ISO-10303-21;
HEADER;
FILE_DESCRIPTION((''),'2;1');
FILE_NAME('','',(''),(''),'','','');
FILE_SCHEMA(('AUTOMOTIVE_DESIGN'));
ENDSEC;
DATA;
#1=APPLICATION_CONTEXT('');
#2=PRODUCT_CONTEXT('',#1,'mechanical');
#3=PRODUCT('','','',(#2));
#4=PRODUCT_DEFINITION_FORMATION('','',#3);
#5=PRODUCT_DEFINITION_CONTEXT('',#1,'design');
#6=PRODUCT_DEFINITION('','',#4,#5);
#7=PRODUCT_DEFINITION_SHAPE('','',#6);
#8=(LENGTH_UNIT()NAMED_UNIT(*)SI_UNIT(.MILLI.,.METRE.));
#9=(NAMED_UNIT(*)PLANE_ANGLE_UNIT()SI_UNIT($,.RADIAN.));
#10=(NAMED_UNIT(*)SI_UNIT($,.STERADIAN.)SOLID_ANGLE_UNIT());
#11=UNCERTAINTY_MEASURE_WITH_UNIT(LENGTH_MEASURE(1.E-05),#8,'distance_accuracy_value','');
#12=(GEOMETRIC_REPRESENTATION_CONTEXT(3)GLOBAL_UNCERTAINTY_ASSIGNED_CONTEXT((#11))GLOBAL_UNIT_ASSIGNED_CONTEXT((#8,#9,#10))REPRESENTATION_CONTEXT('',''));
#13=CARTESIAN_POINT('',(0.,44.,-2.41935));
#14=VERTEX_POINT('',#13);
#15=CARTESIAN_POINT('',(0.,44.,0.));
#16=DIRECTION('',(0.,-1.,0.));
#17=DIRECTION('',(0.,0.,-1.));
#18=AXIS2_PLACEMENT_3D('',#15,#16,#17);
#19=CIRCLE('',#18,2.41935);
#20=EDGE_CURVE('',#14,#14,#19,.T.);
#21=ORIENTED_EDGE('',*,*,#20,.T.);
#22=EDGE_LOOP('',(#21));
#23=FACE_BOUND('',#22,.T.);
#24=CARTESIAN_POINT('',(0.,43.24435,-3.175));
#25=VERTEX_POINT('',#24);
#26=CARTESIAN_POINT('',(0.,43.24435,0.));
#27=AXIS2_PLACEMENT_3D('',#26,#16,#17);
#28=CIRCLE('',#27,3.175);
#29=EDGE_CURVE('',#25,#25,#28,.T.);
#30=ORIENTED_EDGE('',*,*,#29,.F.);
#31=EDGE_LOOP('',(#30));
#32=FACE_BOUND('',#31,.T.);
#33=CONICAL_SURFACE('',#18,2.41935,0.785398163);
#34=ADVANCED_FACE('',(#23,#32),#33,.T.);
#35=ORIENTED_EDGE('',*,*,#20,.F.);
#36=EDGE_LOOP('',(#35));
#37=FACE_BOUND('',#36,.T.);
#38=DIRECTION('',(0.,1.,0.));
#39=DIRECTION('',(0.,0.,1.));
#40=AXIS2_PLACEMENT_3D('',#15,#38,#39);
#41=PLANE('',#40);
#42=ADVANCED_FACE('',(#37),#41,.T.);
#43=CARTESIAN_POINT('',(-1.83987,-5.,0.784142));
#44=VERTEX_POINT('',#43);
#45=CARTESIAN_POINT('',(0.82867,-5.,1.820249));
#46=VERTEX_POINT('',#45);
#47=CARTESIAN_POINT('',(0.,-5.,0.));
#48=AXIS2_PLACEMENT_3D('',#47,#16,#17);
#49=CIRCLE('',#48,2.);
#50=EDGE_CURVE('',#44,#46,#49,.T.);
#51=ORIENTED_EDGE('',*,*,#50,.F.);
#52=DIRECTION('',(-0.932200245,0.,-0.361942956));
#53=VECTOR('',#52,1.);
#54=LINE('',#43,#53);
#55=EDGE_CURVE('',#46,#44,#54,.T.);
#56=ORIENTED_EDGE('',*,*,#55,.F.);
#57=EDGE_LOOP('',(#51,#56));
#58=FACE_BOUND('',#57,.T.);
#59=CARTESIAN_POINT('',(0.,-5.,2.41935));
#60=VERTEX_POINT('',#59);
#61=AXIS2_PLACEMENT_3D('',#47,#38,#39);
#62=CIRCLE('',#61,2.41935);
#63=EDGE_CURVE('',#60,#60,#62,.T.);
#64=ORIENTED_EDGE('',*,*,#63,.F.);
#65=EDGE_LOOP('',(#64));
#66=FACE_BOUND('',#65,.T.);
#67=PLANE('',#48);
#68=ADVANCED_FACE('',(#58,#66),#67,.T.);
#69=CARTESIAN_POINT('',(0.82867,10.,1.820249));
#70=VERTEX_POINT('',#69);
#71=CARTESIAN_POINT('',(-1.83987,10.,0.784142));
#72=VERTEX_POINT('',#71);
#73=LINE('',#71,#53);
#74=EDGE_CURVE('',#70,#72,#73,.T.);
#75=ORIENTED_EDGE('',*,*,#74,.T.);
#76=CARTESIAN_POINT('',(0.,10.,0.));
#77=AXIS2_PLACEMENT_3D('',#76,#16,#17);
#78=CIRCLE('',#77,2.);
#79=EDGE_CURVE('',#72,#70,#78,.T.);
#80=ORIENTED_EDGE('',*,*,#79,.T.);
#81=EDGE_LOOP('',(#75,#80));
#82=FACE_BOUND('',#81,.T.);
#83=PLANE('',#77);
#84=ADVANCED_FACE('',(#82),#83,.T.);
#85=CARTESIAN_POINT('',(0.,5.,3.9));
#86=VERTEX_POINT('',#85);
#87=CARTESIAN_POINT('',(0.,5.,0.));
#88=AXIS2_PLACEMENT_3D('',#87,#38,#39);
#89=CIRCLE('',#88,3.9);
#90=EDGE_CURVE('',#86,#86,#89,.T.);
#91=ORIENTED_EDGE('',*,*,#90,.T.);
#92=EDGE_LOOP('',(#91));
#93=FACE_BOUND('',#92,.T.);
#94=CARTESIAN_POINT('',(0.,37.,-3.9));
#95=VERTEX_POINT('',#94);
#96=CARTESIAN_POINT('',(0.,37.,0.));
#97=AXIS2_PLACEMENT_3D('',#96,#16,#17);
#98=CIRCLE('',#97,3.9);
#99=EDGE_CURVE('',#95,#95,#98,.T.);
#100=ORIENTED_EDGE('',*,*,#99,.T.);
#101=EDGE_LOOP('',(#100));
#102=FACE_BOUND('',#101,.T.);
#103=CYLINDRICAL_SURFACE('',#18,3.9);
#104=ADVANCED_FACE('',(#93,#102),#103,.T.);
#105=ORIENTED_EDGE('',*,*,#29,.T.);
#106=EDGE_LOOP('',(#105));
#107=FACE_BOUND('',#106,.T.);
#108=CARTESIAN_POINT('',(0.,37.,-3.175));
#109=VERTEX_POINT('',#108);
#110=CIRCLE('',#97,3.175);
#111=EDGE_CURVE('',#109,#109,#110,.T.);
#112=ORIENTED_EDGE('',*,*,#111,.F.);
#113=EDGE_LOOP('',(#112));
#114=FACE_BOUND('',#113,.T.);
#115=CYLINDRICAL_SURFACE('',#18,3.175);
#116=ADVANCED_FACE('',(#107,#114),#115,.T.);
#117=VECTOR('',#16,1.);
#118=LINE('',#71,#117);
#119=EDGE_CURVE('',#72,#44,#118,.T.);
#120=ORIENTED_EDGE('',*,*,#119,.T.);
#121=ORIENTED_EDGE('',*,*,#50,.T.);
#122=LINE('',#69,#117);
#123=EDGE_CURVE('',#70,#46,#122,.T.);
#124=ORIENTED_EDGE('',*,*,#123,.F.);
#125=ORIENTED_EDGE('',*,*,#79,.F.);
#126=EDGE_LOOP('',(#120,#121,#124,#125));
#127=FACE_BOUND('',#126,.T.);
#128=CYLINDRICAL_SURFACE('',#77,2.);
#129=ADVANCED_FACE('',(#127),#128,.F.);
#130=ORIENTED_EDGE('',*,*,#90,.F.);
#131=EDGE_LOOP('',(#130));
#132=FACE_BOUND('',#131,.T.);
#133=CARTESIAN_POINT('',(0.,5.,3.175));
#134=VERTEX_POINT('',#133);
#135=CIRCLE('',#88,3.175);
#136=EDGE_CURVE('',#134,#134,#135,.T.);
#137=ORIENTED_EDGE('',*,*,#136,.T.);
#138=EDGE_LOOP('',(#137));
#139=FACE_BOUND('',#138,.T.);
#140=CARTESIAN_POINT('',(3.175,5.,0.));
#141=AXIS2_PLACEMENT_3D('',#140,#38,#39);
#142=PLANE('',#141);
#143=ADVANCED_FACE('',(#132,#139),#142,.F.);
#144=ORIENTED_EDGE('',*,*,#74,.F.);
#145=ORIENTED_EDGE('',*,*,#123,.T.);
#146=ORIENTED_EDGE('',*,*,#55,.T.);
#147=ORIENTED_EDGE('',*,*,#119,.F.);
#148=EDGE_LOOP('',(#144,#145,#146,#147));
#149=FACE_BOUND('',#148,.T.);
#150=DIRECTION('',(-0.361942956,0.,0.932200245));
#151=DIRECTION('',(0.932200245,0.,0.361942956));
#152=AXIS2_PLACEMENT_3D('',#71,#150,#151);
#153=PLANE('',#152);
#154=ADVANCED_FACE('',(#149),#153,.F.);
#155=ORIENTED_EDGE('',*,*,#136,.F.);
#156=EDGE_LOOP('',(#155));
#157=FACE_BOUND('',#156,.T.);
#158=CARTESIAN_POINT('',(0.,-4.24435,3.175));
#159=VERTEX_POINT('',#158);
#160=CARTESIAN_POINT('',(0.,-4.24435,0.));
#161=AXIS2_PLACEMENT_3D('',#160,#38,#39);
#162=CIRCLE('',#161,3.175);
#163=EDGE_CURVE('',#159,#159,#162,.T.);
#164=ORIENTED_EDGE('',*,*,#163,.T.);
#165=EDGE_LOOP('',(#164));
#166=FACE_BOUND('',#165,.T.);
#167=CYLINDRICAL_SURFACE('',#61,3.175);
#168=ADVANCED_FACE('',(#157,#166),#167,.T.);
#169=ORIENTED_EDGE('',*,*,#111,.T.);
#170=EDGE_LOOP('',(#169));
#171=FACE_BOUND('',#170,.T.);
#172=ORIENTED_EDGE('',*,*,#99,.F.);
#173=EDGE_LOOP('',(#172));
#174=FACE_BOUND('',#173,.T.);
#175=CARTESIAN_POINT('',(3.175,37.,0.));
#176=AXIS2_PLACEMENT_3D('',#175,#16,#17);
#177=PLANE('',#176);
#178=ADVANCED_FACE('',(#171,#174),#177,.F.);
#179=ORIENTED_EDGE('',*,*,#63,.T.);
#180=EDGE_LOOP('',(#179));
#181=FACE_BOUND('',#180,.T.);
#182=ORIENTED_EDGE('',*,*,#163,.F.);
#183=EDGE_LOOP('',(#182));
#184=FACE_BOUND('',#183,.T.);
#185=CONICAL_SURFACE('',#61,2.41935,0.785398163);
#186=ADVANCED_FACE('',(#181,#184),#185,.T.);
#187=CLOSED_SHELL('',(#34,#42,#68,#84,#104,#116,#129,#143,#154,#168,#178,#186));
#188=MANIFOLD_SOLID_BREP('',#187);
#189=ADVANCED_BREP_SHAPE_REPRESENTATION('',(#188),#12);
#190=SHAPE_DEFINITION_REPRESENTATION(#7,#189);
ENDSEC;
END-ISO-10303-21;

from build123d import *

# Parameters (mm, degrees)
SKETCH1_R           = 3.9
BOSS_EXTRUDE1_DEPTH = 44
BOSS_EXTRUDE2_START = 5
SKETCH6_R           = 3.9
BOSS_EXTRUDE2_DEPTH = 5
CUT_EXTRUDE1_DEPTH  = 8
CUT_EXTRUDE2_DEPTH  = 15


# Read off the part's stored shape, not the designer's step: 1/4-20 Machine Threads Stud2, 1/4-20 Machine Threads Stud4
with BuildPart() as part:
    # Sketch1 → Boss-Extrude1 (new body)
    with BuildSketch(Plane(origin=(0, 0, 0), x_dir=(1, 0, 0), z_dir=(0, 1, 0))):
        with Locations(Location((0, 0, 0), (0, 0, 270))):
            Circle(SKETCH1_R)
    extrude(amount=BOSS_EXTRUDE1_DEPTH)

    # 1/4-20 Machine Threads Stud2 outline → 1/4-20 Machine Threads Stud2 (revolve, cut)
    with BuildSketch(Plane.XY):
        Polygon((3.9, 44), (2.41935, 44), (3.175, 43.24435), (3.175, 37), (3.9, 37), align=None)
    revolve(axis=Axis((0, 0, 0), (0, 1, 0)), mode=Mode.SUBTRACT)

    # Sketch6 → Boss-Extrude2 (add)
    with BuildSketch(Plane.XZ.offset(BOSS_EXTRUDE2_START)):
        with Locations(Location((0, 0, 0), (0, 0, 270))):
            Circle(SKETCH6_R)
    extrude(amount=-BOSS_EXTRUDE2_DEPTH)

    # 1/4-20 Machine Threads Stud4 outline → 1/4-20 Machine Threads Stud4 (revolve, cut)
    with BuildSketch(Plane.XY):
        Polygon((2.41935, -5), (3.9, -5), (3.9, 5), (3.175, 5), (3.175, -4.24435), align=None)
    revolve(axis=Axis((0, 0, 0), (0, 1, 0)), mode=Mode.SUBTRACT)

    # Sketch10 → Cut-Extrude1 (cut)
    with BuildSketch(Plane.XZ.offset(5)):
        with BuildLine():
            Line((-1.269821024, 0.798470142), (1.269821024, 0.798470142))
            ThreePointArc((1.269821024, 0.798470142), (0, -1.5), (-1.269821024, 0.798470142))
        make_face()
    extrude(amount=-CUT_EXTRUDE1_DEPTH, mode=Mode.SUBTRACT)

    # Sketch11 → Cut-Extrude2 (cut)
    with BuildSketch(Plane.XZ.offset(5)):
        with BuildLine():
            Line((-1.839869815, 0.784142248), (0.828669593, 1.820249078))
            ThreePointArc((0.828669593, 1.820249078), (0.723885911, -1.86440049), (-1.839869815, 0.784142248))
        make_face()
    extrude(amount=-CUT_EXTRUDE2_DEPTH, mode=Mode.SUBTRACT)


solid = part.part
